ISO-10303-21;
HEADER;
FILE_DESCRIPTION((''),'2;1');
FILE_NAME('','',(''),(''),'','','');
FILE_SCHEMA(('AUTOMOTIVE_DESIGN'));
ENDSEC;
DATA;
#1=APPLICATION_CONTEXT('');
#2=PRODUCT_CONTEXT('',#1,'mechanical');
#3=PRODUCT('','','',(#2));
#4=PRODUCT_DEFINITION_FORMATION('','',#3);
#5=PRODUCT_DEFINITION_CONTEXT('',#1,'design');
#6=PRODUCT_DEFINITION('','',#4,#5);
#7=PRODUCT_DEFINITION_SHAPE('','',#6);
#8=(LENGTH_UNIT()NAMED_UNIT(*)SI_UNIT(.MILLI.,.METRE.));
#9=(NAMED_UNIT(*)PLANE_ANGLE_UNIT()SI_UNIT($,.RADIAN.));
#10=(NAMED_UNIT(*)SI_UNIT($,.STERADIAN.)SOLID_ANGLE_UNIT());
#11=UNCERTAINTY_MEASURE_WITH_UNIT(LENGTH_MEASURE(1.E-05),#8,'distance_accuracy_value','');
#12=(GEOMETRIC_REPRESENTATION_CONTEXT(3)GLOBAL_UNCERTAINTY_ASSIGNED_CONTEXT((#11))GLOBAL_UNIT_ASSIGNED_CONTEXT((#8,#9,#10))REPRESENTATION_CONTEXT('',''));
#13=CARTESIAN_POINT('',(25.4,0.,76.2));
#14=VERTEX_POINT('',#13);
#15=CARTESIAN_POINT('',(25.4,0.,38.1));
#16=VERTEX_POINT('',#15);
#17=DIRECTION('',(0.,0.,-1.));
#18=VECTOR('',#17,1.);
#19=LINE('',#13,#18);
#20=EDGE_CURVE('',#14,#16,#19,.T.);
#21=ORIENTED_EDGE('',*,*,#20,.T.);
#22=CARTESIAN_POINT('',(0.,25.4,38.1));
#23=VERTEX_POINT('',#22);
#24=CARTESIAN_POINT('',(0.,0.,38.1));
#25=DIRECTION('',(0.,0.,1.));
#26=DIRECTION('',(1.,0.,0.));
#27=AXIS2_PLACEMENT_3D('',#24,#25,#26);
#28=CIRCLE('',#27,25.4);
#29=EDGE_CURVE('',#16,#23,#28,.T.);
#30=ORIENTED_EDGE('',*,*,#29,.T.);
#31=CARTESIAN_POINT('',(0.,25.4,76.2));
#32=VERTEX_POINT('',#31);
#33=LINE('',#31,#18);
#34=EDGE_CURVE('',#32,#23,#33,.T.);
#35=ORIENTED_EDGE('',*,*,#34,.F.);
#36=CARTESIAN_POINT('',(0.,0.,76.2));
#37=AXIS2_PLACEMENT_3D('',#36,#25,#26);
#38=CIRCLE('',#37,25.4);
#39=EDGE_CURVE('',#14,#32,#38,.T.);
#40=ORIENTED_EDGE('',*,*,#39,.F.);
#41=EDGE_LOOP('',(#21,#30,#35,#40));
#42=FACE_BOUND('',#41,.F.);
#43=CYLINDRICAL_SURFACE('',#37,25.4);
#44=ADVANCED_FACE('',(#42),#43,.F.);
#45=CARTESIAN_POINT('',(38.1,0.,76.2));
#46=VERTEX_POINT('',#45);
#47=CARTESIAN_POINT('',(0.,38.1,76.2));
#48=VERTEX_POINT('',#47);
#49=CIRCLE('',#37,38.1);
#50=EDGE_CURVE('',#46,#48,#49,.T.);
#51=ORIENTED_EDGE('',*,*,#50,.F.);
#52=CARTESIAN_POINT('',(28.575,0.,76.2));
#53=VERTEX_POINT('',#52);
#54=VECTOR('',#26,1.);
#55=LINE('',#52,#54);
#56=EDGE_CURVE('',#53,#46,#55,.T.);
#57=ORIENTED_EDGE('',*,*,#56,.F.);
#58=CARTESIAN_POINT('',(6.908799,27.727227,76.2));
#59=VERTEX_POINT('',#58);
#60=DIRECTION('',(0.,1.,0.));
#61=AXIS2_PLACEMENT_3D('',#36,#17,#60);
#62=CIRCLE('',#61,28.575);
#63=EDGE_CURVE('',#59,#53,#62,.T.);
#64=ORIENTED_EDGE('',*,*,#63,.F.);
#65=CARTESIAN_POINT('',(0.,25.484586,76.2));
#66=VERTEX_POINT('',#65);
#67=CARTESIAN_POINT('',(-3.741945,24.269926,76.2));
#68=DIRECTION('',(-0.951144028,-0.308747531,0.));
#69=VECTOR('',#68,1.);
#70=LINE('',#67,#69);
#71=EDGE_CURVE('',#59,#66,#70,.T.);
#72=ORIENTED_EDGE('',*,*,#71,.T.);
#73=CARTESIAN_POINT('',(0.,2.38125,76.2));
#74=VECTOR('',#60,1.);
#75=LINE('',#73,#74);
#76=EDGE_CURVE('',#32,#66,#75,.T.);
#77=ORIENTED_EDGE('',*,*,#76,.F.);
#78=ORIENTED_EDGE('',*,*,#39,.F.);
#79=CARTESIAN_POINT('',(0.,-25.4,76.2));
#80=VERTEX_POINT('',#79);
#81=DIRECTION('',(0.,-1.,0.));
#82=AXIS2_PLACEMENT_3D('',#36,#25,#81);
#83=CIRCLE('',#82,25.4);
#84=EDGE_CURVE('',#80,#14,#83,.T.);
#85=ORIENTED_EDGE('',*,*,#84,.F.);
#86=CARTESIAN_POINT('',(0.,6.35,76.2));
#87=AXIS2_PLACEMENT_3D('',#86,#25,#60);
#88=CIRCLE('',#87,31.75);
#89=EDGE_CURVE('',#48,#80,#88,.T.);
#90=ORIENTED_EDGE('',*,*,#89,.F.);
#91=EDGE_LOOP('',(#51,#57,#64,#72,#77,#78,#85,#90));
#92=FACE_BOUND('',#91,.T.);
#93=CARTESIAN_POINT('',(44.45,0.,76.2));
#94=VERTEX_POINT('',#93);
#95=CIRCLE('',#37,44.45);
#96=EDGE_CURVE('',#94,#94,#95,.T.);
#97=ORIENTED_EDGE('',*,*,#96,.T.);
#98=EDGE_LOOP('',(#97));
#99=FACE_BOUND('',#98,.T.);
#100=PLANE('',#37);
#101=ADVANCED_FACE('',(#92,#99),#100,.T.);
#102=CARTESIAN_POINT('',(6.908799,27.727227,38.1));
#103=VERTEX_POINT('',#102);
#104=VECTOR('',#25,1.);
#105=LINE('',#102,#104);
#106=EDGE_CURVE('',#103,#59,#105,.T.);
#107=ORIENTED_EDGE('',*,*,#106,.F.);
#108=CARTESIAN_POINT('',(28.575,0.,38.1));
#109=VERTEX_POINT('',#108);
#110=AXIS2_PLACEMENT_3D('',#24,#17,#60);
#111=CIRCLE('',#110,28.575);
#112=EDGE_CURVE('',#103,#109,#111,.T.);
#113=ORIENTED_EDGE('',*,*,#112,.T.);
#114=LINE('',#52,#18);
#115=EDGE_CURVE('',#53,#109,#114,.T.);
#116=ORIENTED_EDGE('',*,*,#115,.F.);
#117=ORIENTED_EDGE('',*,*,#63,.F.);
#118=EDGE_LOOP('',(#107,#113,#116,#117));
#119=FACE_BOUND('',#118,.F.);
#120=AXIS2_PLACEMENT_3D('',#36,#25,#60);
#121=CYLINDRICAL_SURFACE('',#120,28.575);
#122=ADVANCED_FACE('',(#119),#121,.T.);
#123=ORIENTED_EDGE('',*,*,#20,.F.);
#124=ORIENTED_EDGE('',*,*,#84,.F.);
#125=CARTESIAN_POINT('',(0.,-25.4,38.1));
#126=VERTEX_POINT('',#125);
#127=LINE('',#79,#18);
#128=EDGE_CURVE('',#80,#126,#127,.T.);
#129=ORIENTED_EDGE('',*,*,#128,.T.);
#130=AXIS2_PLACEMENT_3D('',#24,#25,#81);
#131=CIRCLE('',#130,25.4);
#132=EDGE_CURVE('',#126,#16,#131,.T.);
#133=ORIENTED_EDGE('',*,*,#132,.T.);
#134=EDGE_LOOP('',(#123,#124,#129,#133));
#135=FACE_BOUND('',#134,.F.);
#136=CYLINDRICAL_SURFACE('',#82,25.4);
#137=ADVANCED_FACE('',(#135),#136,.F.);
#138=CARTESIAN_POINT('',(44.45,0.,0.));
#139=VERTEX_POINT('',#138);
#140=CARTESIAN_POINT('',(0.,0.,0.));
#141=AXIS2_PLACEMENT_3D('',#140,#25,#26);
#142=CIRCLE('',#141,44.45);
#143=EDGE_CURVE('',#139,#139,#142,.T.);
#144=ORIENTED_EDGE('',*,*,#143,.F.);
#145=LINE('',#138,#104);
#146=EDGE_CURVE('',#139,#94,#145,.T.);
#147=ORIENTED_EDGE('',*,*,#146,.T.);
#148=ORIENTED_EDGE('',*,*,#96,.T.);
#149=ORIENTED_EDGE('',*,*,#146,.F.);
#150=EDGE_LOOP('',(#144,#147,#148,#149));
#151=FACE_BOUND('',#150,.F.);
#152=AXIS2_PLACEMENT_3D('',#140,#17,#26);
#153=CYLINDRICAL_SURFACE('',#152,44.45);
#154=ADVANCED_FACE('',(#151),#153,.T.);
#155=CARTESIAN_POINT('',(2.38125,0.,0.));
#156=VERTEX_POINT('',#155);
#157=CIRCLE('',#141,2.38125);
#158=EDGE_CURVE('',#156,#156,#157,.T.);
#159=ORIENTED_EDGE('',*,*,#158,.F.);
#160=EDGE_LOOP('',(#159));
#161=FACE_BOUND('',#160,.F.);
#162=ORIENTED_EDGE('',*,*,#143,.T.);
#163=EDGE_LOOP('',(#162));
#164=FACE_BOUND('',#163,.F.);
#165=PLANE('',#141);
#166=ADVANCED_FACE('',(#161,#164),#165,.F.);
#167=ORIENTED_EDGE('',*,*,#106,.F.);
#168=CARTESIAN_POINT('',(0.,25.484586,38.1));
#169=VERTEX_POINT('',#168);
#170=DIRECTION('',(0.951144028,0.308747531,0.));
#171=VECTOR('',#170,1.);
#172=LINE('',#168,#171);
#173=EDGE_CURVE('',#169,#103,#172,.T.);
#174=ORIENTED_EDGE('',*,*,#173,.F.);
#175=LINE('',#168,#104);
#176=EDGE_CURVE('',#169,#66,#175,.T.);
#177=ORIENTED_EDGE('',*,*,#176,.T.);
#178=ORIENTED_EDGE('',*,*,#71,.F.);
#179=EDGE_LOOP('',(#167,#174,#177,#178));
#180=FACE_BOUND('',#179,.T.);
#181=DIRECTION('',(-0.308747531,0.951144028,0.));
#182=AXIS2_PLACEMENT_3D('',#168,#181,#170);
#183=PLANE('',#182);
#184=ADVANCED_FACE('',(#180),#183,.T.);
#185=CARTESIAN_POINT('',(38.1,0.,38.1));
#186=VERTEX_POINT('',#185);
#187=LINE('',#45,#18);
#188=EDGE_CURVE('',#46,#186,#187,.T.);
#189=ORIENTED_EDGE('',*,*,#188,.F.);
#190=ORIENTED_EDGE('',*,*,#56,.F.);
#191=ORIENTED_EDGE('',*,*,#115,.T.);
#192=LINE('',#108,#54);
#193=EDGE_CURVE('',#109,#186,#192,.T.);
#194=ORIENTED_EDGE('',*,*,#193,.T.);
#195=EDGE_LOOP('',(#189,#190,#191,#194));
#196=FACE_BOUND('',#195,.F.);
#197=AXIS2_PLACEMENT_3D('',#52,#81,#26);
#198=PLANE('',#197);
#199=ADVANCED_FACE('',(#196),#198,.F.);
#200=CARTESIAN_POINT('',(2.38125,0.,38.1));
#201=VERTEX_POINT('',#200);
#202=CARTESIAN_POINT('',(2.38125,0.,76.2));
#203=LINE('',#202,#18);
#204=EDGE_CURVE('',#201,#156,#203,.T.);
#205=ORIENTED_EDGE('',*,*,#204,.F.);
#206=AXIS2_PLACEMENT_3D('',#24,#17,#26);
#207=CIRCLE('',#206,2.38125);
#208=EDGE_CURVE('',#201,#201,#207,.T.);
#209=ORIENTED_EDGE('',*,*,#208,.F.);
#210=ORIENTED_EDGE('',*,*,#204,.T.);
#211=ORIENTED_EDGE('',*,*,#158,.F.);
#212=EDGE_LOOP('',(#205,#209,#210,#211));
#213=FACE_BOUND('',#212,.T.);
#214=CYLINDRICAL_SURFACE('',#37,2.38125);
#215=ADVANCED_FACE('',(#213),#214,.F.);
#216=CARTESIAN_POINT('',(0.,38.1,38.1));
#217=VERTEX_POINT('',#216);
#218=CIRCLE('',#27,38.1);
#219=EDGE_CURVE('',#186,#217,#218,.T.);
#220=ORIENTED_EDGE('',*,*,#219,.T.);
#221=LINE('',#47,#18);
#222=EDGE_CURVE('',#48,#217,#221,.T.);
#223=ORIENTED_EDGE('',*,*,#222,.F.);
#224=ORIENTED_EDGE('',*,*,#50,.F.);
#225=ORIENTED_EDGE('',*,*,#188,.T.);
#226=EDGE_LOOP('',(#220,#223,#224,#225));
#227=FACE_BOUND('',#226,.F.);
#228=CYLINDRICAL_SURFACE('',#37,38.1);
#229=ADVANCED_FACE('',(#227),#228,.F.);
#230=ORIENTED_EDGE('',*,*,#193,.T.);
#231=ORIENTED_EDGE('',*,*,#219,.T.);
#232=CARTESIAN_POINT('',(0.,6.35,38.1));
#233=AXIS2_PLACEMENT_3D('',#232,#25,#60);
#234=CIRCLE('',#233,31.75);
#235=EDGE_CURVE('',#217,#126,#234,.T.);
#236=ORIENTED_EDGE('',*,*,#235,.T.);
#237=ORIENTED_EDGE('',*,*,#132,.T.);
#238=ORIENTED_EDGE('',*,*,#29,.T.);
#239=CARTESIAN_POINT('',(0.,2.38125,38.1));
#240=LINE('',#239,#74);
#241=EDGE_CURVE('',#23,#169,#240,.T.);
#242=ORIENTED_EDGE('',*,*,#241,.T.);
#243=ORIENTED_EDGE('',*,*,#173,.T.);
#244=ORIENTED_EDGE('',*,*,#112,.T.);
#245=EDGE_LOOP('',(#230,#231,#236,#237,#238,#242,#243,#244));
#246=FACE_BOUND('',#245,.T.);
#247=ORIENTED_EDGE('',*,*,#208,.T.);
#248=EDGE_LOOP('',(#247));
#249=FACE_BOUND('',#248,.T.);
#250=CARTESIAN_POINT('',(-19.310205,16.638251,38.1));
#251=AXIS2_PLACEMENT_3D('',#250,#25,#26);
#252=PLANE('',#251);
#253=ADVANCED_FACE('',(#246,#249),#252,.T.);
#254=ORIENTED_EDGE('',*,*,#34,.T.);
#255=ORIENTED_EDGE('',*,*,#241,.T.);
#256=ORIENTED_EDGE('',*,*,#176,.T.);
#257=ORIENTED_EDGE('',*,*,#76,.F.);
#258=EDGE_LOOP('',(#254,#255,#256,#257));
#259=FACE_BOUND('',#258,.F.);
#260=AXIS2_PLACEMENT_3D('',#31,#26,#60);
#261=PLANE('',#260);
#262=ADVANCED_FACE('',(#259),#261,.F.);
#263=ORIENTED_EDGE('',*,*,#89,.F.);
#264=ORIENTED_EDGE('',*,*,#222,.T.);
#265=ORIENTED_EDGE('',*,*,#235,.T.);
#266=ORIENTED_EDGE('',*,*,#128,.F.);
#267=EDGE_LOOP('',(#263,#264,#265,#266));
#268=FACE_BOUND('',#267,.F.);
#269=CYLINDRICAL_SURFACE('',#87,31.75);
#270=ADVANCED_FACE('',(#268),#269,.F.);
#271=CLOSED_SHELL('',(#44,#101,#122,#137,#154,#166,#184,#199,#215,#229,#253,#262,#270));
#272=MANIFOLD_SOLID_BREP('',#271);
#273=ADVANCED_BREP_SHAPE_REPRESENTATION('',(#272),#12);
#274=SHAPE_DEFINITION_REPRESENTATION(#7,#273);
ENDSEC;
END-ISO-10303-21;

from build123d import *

# Parameters (mm, degrees)
F0_R        = 44.45
F1_DEPTH    = 76.2
F3_DEPTH    = 38.1
F4_T1_DEPTH = 56.0791508125
F5_DEPTH    = 76.201


# Not quite as in the source:
# - a fillet or chamfer that OpenCascade refuses, or shapes differently, is made with other operations: its cross-section is extruded or revolved along the edge and cut away or added


with BuildPart() as f1:
    # F0 (on Top) → F1 (new body)
    with BuildSketch(Plane.XY):
        Circle(F0_R)
    extrude(amount=F1_DEPTH)

    # F2 (on face) → F3 (cut)
    with BuildSketch(Plane.XY.offset(76.2)):
        with BuildLine():
            Line((0, 28.575), (0, 38.1))
            ThreePointArc((0, 38.1), (-28.175329967, 20.986026826), (-25.976370723, -11.90625))
            ThreePointArc((-25.976370723, -11.90625), (-24.0494461345, 15.4322637881), (0, 28.575))
        make_face()
        with BuildLine():
            ThreePointArc((0, 28.575), (-24.0494461345, 15.4322637881), (-25.976370723, -11.90625))
            ThreePointArc((-25.976370723, -11.90625), (-14.636026826, -21.825329967), (0, -25.4))
            ThreePointArc((0, -25.4), (-25.4, 0), (0, 25.4))
            Line((0, 25.4), (0, 28.575))
        make_face()
        with BuildLine():
            ThreePointArc((0, 25.4), (-25.4, 0), (0, -25.4))
            Line((0, -25.4), (0, -2.38125))
            ThreePointArc((0, -2.38125), (-2.38125, 0), (0, 2.38125))
            Line((0, 2.38125), (0, 25.4))
        make_face()
        with BuildLine():
            Line((0, -2.38125), (0, -25.4))
            ThreePointArc((0, -25.4), (17.9605122421, -17.9605122421), (25.4, 0))
            ThreePointArc((25.4, 0), (17.9605122421, 17.9605122421), (0, 25.4))
            Line((0, 25.4), (0, 2.38125))
            ThreePointArc((0, 2.38125), (1.6837980227, 1.6837980227), (2.38125, 0))
            ThreePointArc((2.38125, 0), (1.6837980227, -1.6837980227), (0, -2.38125))
        make_face()
        with BuildLine():
            Line((28.575, 0), (38.1, 0))
            ThreePointArc((38.1, 0), (26.9407683632, 26.9407683632), (0, 38.1))
            Line((0, 38.1), (0, 28.575))
            ThreePointArc((0, 28.575), (20.2055762724, 20.2055762724), (28.575, 0))
        make_face()
    extrude(amount=-F3_DEPTH, mode=Mode.SUBTRACT)

    # F4: chamfer of 6.35 x 2.3112109876 on 1 edges, made by hand

    # F4_s2 → F4_t1 (cut)
    with BuildSketch(Plane.XY.offset(38.1)):
        with BuildLine():
            Line((0, 25.4845857979), (6.9087994087, 27.7272269751))
            ThreePointArc((6.9087994087, 27.7272269751), (3.5951834098, 28.3479325745), (0, 28.575))
            Line((0, 28.575), (0, 25.4845857979))
        make_face()
    extrude(amount=F4_T1_DEPTH, mode=Mode.SUBTRACT)

    # F5 (cut, through all): a face of the model
    f5_faces = [f1.faces().sort_by_distance(p)[0] for p in [
        (0, 0, 76.2),
    ]]
    extrude(f5_faces, amount=-F5_DEPTH, mode=Mode.SUBTRACT)


solid = f1.part
